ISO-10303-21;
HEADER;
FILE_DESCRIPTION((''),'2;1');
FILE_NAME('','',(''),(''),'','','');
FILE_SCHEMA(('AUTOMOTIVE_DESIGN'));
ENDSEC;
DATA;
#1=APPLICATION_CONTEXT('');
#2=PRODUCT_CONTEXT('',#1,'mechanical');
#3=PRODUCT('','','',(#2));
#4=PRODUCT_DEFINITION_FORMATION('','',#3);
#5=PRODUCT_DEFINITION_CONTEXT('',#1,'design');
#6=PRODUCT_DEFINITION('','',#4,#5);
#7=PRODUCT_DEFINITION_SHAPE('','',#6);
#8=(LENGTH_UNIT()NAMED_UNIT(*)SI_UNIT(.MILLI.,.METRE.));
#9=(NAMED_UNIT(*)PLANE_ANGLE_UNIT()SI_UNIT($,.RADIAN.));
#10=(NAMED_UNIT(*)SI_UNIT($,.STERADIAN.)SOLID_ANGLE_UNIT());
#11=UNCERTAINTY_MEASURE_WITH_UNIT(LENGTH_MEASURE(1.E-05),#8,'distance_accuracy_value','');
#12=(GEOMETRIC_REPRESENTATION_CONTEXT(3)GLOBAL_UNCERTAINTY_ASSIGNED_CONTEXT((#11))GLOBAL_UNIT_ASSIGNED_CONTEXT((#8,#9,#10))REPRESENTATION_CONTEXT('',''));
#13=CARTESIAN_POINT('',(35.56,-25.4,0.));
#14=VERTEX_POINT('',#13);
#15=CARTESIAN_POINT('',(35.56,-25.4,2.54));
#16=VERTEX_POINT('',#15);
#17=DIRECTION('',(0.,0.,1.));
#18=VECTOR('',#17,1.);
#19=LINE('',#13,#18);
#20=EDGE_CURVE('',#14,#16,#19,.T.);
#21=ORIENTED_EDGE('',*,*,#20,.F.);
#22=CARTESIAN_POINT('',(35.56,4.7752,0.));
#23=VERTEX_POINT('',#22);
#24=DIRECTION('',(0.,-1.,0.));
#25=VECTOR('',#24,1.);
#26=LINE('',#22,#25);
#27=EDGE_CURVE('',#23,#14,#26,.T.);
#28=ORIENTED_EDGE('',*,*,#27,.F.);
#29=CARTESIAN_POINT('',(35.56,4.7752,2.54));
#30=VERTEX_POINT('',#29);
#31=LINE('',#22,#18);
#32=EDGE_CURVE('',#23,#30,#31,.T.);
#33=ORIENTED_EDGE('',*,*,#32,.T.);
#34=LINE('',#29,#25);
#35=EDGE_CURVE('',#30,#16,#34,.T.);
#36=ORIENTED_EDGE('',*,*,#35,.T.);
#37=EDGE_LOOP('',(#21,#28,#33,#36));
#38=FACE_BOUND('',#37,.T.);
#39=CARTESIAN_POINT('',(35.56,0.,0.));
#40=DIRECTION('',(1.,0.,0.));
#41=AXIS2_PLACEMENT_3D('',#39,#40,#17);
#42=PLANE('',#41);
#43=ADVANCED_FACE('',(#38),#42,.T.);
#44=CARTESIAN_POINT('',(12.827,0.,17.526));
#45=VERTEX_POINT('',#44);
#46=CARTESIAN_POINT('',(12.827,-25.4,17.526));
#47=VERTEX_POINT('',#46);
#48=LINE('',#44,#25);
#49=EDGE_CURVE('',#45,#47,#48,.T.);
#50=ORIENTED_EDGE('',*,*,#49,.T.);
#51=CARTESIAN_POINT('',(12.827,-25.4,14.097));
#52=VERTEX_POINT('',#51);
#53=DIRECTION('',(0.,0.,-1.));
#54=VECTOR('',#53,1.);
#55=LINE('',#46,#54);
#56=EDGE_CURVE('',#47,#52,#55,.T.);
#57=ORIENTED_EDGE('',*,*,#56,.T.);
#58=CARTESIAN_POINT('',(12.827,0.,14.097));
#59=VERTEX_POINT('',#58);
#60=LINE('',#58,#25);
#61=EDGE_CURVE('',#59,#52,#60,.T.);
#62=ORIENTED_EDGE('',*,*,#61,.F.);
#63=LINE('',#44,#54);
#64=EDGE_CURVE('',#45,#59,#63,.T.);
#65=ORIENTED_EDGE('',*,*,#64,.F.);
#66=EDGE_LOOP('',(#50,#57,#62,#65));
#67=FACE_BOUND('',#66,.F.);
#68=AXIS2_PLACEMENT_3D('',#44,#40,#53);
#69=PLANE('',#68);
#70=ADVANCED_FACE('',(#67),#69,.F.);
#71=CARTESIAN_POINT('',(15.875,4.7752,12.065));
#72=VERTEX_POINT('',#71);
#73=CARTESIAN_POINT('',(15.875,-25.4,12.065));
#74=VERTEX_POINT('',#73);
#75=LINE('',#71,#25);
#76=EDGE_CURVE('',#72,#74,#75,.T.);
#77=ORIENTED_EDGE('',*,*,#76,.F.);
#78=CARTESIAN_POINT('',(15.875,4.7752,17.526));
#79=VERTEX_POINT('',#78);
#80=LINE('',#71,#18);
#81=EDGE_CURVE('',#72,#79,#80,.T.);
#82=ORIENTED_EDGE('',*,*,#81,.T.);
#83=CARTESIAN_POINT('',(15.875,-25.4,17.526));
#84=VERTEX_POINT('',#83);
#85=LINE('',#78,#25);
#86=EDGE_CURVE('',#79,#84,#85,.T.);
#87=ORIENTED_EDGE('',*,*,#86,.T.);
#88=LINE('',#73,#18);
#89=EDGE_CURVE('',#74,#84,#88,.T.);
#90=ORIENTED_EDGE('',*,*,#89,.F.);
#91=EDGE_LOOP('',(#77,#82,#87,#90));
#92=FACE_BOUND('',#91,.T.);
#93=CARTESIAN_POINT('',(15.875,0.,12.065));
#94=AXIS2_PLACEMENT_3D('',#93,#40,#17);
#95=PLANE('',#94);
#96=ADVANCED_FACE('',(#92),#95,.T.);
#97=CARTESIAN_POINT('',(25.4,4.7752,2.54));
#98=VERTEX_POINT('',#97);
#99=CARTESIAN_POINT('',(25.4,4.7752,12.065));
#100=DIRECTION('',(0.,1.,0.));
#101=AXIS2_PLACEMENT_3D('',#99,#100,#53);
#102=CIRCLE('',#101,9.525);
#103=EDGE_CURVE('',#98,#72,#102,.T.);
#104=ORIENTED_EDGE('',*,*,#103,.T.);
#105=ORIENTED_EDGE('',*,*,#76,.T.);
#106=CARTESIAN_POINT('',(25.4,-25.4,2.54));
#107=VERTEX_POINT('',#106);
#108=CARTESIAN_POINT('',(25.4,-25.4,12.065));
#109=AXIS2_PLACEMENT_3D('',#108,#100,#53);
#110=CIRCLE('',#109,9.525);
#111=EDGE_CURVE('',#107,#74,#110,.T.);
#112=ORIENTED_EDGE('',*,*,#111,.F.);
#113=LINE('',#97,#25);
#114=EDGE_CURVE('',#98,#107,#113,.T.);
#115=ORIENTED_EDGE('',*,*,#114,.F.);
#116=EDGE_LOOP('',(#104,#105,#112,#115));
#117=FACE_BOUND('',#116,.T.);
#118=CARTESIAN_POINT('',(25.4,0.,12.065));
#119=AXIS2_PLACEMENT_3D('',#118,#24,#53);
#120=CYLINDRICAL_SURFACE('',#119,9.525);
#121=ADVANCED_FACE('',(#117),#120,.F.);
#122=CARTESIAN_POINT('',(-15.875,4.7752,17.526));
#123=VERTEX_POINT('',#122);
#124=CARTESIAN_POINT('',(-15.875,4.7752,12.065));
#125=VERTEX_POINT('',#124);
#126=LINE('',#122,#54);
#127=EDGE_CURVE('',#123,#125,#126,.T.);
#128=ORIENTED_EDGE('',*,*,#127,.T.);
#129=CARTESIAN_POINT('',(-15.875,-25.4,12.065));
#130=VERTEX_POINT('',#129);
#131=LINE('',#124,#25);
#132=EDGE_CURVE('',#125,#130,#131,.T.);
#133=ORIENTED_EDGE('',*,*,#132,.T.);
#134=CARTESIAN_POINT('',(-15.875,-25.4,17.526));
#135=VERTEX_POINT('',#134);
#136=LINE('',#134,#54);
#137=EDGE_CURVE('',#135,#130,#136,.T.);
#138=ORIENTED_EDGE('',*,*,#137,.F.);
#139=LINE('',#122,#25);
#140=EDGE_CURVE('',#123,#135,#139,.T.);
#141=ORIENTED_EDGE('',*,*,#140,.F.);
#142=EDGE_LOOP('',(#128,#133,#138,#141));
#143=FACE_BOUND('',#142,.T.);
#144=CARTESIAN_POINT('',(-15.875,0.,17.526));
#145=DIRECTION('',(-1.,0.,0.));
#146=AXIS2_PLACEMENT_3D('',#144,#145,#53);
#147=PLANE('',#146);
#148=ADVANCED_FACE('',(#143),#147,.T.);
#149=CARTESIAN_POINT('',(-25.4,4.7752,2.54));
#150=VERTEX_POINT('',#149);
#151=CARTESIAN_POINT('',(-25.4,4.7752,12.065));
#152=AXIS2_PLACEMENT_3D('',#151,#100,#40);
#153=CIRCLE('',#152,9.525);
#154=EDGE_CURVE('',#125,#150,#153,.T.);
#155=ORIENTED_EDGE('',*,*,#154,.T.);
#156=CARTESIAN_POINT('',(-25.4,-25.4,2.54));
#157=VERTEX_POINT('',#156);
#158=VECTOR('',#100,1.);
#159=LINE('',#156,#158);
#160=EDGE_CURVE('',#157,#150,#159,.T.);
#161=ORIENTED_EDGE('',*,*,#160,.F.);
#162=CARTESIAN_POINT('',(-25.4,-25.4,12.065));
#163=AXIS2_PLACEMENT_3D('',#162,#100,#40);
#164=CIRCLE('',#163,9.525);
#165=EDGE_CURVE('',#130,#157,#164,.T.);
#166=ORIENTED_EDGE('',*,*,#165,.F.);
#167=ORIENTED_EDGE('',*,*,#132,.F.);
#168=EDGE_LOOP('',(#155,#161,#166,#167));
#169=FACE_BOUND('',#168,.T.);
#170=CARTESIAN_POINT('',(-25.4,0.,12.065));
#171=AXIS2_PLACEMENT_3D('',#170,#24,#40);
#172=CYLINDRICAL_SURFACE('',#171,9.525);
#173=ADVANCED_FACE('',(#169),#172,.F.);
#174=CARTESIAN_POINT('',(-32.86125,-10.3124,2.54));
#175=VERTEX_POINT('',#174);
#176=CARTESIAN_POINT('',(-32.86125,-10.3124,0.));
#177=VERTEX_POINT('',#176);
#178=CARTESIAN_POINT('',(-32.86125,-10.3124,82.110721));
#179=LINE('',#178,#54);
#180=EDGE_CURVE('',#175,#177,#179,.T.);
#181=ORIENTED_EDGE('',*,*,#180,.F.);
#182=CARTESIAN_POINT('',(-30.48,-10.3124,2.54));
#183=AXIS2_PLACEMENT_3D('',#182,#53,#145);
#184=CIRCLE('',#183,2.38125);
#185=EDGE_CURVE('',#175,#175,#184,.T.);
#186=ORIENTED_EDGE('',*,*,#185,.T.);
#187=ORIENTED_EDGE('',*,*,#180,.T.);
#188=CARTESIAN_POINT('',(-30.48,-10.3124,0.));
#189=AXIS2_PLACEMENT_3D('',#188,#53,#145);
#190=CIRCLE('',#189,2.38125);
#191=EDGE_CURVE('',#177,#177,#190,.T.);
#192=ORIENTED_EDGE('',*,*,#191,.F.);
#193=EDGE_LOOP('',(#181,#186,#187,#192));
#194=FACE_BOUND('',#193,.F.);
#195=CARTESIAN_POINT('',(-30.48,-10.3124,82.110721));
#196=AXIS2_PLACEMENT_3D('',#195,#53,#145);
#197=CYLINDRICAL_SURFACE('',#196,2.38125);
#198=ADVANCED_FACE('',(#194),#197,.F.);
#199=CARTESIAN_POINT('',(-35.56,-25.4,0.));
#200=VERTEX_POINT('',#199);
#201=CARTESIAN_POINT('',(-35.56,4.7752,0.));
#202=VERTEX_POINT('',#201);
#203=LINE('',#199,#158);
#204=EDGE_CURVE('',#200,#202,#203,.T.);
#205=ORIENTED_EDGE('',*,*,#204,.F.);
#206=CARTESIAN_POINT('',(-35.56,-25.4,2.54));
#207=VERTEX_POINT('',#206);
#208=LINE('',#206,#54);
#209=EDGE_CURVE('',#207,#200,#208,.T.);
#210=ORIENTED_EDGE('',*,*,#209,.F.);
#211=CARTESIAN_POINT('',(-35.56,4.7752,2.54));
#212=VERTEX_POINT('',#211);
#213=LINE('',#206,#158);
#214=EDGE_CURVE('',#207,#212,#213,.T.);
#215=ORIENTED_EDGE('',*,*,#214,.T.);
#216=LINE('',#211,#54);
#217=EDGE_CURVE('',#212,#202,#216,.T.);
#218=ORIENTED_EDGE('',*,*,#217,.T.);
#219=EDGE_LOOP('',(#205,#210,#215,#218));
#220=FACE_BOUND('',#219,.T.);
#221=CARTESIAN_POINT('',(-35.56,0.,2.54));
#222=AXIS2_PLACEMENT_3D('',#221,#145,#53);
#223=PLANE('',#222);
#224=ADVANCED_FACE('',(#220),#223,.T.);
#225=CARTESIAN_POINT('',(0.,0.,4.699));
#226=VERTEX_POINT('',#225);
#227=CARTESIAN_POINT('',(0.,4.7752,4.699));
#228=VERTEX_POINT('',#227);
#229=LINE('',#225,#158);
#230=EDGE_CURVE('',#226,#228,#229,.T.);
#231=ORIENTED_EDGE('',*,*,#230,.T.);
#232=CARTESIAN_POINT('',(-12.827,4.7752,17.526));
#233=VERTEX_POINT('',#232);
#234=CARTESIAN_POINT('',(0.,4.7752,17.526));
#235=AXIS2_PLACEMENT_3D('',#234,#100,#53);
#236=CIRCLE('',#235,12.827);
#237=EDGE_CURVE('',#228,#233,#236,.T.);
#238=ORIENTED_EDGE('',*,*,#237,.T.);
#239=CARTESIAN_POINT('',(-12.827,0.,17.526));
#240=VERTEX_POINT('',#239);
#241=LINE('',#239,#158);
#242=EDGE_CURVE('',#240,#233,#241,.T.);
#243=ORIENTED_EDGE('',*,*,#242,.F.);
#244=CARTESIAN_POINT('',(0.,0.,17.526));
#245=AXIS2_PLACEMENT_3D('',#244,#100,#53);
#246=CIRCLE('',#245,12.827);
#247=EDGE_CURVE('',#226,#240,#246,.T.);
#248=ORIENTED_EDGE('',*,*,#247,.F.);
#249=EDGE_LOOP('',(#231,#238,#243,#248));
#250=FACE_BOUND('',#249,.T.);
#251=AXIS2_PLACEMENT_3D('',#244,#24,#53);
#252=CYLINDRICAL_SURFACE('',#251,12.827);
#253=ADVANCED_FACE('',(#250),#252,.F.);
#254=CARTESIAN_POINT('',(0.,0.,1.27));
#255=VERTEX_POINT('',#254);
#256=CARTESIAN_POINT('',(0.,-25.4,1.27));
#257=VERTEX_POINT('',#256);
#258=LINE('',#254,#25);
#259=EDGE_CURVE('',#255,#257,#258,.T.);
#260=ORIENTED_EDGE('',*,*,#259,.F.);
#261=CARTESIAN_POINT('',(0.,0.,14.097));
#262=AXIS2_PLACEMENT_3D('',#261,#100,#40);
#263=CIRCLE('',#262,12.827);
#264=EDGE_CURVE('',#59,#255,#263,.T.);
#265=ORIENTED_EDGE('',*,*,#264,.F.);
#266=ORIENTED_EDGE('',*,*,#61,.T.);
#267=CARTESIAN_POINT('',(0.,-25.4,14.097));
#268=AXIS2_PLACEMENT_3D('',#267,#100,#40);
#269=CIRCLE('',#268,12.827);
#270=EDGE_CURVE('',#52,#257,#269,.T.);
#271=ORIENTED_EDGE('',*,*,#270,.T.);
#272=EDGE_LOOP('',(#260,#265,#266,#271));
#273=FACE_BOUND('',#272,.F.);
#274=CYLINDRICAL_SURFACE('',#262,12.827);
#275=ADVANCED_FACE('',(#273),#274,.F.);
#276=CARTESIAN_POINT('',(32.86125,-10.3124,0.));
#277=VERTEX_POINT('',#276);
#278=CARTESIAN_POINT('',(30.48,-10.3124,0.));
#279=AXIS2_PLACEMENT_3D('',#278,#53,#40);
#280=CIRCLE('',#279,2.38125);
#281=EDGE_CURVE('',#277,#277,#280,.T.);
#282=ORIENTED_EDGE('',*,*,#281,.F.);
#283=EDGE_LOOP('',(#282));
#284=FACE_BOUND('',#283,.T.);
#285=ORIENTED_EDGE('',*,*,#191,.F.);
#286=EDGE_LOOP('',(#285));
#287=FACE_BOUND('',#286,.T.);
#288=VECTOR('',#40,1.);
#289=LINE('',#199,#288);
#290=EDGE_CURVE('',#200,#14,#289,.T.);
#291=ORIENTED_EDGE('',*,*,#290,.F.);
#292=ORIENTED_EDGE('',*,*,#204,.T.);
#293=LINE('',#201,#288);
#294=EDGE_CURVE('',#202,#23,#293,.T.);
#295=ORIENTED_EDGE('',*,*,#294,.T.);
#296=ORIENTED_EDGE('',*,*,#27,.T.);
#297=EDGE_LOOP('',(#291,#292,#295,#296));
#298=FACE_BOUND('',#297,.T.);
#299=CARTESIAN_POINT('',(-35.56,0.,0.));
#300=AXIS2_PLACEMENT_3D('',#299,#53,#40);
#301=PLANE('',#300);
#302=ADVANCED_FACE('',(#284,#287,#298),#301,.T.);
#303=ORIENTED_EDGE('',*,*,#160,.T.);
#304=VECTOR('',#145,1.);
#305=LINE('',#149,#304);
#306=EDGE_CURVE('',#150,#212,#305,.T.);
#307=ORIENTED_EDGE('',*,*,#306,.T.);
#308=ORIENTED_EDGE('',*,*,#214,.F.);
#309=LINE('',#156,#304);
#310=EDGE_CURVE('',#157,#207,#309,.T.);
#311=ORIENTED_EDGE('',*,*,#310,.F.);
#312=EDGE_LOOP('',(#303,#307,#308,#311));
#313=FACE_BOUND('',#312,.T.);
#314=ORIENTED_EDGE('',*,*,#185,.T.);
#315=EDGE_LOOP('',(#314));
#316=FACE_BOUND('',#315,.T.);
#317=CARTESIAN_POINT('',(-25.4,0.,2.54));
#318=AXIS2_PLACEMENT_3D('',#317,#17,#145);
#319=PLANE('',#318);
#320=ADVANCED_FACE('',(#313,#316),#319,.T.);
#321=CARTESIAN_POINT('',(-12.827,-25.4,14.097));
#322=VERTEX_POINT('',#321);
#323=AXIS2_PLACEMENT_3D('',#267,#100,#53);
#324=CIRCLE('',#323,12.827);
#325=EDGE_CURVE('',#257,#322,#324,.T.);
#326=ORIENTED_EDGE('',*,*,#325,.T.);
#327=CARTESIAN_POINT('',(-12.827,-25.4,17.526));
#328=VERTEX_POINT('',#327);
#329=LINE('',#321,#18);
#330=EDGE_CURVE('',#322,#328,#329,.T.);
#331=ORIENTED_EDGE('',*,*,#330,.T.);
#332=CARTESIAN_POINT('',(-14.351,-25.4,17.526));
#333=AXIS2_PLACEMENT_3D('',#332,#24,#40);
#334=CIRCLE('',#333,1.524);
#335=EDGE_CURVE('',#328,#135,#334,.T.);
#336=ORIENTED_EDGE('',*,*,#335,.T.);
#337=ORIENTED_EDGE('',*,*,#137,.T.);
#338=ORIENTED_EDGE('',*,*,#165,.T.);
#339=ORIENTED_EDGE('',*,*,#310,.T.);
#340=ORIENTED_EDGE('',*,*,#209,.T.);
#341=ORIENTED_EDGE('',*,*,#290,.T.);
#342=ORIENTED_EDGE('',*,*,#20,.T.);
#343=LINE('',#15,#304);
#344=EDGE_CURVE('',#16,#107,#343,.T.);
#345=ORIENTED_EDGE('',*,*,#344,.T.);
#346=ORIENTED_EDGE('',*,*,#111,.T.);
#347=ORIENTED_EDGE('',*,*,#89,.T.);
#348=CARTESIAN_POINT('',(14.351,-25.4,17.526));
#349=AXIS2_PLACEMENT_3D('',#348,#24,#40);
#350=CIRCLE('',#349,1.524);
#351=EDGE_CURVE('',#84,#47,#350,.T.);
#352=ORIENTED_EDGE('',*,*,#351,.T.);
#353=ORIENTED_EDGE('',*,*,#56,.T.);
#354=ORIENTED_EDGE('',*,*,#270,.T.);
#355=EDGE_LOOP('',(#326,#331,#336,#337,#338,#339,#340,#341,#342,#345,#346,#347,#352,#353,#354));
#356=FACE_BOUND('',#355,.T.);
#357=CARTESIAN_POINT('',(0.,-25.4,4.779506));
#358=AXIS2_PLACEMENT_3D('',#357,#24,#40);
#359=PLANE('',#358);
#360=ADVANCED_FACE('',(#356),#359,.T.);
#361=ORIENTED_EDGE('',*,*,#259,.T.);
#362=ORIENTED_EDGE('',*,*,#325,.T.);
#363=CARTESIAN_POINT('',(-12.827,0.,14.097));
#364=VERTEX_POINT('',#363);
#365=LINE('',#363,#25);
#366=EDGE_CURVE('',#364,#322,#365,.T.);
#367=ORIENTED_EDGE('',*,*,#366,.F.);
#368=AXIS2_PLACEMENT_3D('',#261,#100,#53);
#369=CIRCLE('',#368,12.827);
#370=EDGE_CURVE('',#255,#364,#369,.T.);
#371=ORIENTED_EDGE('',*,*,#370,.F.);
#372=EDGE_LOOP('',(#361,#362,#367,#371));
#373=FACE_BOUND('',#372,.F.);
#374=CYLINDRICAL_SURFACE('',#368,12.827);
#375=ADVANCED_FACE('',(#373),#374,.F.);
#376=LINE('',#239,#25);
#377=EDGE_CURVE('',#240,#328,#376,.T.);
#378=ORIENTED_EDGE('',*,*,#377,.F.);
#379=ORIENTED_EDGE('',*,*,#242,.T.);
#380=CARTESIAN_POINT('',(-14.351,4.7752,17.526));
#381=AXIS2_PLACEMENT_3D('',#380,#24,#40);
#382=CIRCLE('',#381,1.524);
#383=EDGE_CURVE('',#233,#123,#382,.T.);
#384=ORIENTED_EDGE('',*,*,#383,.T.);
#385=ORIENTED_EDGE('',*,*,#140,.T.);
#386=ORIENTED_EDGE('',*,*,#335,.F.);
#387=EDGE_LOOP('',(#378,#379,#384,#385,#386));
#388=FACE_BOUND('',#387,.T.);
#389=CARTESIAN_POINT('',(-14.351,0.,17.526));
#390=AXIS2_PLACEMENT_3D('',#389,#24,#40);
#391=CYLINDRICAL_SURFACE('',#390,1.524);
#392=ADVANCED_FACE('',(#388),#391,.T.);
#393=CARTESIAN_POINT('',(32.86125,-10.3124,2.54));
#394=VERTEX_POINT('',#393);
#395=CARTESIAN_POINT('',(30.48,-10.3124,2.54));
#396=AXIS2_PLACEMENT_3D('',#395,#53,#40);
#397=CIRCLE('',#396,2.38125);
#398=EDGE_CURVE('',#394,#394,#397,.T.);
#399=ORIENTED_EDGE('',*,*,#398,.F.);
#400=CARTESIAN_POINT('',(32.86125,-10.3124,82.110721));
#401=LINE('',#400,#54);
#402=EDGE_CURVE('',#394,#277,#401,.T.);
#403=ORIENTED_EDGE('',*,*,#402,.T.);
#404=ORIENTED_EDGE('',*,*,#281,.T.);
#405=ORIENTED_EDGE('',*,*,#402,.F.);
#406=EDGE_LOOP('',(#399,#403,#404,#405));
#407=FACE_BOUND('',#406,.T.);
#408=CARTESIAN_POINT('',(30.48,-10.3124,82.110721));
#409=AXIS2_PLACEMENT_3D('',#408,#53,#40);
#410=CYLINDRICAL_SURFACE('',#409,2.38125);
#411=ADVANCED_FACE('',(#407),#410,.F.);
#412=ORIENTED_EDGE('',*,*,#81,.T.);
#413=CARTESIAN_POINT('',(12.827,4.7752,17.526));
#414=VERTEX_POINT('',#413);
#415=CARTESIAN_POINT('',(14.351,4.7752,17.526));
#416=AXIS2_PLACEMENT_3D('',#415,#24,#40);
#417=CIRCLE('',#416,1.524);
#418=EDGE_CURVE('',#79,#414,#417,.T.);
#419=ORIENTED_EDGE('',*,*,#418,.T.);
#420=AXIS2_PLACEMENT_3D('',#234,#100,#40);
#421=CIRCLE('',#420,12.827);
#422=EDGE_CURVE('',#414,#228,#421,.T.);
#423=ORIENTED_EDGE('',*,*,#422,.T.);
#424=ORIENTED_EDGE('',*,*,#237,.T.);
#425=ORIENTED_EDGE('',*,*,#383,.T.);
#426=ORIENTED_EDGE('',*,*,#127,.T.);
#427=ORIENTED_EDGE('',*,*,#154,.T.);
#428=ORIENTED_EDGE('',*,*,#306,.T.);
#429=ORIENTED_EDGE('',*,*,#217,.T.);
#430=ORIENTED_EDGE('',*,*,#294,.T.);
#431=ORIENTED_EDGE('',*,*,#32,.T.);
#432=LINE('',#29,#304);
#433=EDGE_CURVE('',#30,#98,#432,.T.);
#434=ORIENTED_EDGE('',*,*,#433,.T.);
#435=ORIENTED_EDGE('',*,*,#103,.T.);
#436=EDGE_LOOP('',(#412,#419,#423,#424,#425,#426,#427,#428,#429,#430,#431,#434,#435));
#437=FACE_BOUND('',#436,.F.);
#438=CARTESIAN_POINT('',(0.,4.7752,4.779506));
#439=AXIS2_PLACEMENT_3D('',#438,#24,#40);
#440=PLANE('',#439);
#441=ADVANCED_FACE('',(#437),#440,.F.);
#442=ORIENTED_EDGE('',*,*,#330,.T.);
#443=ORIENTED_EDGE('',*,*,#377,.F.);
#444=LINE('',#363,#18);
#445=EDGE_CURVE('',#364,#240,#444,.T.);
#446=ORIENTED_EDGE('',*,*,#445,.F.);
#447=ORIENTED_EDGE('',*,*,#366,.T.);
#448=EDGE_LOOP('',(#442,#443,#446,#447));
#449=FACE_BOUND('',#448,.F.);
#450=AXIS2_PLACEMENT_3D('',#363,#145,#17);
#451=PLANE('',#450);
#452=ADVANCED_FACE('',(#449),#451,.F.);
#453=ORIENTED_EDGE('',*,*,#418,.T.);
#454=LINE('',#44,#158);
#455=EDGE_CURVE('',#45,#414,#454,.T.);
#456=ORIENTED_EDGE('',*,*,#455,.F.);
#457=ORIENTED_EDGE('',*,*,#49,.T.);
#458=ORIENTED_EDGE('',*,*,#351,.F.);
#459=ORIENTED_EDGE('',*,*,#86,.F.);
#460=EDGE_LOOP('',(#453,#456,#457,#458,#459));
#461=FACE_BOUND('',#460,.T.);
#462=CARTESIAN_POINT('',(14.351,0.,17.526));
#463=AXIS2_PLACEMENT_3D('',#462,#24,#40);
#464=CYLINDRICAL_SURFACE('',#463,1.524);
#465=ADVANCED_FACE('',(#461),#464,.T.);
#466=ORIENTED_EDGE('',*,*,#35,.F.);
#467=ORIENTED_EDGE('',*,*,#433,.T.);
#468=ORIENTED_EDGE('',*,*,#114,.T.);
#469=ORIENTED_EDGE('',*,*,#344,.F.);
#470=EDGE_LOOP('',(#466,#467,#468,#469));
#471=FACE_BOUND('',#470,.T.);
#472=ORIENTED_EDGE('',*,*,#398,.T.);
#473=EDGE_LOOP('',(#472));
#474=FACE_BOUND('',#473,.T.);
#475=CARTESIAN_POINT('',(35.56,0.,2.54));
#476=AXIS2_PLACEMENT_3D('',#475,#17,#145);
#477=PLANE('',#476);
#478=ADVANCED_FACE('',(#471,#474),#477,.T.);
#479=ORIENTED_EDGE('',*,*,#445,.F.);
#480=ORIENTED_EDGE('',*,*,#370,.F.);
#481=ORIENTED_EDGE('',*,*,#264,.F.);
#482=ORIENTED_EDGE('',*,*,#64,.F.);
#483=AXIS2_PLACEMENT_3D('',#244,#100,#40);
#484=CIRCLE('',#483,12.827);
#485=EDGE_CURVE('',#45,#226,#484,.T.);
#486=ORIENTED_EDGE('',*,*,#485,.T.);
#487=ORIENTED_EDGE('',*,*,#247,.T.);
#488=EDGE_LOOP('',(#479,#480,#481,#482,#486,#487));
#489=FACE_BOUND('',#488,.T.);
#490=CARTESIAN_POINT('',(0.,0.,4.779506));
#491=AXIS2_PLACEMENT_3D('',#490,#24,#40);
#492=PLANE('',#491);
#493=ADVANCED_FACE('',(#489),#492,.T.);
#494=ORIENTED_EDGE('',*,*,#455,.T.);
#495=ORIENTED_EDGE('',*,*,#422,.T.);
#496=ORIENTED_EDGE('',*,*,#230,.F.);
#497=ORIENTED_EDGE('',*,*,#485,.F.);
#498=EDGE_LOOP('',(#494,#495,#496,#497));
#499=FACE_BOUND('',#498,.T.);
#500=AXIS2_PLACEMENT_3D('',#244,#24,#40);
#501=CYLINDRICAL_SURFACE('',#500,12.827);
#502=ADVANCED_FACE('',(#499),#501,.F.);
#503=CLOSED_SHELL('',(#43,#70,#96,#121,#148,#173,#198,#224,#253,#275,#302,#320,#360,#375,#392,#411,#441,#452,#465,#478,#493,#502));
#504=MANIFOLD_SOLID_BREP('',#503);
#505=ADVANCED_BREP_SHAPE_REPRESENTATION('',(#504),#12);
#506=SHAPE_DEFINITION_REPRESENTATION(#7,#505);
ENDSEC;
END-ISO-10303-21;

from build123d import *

# Parameters (mm, degrees)
F1_DEPTH = 25.4
F2_DEPTH = 4.7752
F4_D     = 4.7625


# Not quite as in the source:
# - a pattern or mirror of a feature is missing from the dataset's text; its kind, count and spacing are read off the source's solid


with BuildPart() as f1:
    # F0 (on Front) → F1 (new body)
    with BuildSketch(Plane.XZ):
        with BuildLine():
            Line((-35.56, 0), (0, 0))
            Line((0, 0), (35.56, 0))
            Line((35.56, 0), (35.56, 2.54))
            Line((35.56, 2.54), (25.4, 2.54))
            ThreePointArc((25.4, 2.54), (18.6648079092, 5.3298079092), (15.875, 12.065))
            Line((15.875, 12.065), (15.875, 17.526))
            ThreePointArc((15.875, 17.526), (14.351, 19.05), (12.827, 17.526))
            Line((12.827, 17.526), (12.827, 14.097))
            ThreePointArc((12.827, 14.097), (9.0700586823, 5.0269413177), (0, 1.27))
            ThreePointArc((0, 1.27), (-9.0700586823, 5.0269413177), (-12.827, 14.097))
            Line((-12.827, 14.097), (-12.827, 17.526))
            ThreePointArc((-12.827, 17.526), (-14.351, 19.05), (-15.875, 17.526))
            Line((-15.875, 17.526), (-15.875, 12.065))
            ThreePointArc((-15.875, 12.065), (-18.6648079092, 5.3298079092), (-25.4, 2.54))
            Line((-25.4, 2.54), (-35.56, 2.54))
            Line((-35.56, 2.54), (-35.56, 0))
        make_face()
    extrude(amount=F1_DEPTH)

    # F0 (on Front) → F2 (join)
    with BuildSketch(Plane.XZ):
        with BuildLine():
            Line((-35.56, 0), (0, 0))
            Line((0, 0), (35.56, 0))
            Line((35.56, 0), (35.56, 2.54))
            Line((35.56, 2.54), (25.4, 2.54))
            ThreePointArc((25.4, 2.54), (18.6648079092, 5.3298079092), (15.875, 12.065))
            Line((15.875, 12.065), (15.875, 17.526))
            ThreePointArc((15.875, 17.526), (14.351, 19.05), (12.827, 17.526))
            Line((12.827, 17.526), (12.827, 14.097))
            ThreePointArc((12.827, 14.097), (9.0700586823, 5.0269413177), (0, 1.27))
            ThreePointArc((0, 1.27), (-9.0700586823, 5.0269413177), (-12.827, 14.097))
            Line((-12.827, 14.097), (-12.827, 17.526))
            ThreePointArc((-12.827, 17.526), (-14.351, 19.05), (-15.875, 17.526))
            Line((-15.875, 17.526), (-15.875, 12.065))
            ThreePointArc((-15.875, 12.065), (-18.6648079092, 5.3298079092), (-25.4, 2.54))
            Line((-25.4, 2.54), (-35.56, 2.54))
            Line((-35.56, 2.54), (-35.56, 0))
        make_face()
        with BuildLine():
            ThreePointArc((0, 4.699), (-9.0700586823, 8.4559413177), (-12.827, 17.526))
            Line((-12.827, 17.526), (-12.827, 14.097))
            ThreePointArc((-12.827, 14.097), (-9.0700586823, 5.0269413177), (0, 1.27))
            ThreePointArc((0, 1.27), (9.0700586823, 5.0269413177), (12.827, 14.097))
            Line((12.827, 14.097), (12.827, 17.526))
            ThreePointArc((12.827, 17.526), (9.0700586823, 8.4559413177), (0, 4.699))
        make_face()
    extrude(amount=-F2_DEPTH)

    # F4 (through all)
    with Locations(Plane.XY.offset(2.54)):
        with Locations((-30.48, -10.3124)):
            f4 = Hole(F4_D / 2)

    # F4_copies: F4 across plane
    add(f4.mirror(Plane(origin=(0, 0, 0), x_dir=(0, 0, 1), z_dir=(1, 0, 0))), mode=Mode.SUBTRACT)


solid = f1.part
